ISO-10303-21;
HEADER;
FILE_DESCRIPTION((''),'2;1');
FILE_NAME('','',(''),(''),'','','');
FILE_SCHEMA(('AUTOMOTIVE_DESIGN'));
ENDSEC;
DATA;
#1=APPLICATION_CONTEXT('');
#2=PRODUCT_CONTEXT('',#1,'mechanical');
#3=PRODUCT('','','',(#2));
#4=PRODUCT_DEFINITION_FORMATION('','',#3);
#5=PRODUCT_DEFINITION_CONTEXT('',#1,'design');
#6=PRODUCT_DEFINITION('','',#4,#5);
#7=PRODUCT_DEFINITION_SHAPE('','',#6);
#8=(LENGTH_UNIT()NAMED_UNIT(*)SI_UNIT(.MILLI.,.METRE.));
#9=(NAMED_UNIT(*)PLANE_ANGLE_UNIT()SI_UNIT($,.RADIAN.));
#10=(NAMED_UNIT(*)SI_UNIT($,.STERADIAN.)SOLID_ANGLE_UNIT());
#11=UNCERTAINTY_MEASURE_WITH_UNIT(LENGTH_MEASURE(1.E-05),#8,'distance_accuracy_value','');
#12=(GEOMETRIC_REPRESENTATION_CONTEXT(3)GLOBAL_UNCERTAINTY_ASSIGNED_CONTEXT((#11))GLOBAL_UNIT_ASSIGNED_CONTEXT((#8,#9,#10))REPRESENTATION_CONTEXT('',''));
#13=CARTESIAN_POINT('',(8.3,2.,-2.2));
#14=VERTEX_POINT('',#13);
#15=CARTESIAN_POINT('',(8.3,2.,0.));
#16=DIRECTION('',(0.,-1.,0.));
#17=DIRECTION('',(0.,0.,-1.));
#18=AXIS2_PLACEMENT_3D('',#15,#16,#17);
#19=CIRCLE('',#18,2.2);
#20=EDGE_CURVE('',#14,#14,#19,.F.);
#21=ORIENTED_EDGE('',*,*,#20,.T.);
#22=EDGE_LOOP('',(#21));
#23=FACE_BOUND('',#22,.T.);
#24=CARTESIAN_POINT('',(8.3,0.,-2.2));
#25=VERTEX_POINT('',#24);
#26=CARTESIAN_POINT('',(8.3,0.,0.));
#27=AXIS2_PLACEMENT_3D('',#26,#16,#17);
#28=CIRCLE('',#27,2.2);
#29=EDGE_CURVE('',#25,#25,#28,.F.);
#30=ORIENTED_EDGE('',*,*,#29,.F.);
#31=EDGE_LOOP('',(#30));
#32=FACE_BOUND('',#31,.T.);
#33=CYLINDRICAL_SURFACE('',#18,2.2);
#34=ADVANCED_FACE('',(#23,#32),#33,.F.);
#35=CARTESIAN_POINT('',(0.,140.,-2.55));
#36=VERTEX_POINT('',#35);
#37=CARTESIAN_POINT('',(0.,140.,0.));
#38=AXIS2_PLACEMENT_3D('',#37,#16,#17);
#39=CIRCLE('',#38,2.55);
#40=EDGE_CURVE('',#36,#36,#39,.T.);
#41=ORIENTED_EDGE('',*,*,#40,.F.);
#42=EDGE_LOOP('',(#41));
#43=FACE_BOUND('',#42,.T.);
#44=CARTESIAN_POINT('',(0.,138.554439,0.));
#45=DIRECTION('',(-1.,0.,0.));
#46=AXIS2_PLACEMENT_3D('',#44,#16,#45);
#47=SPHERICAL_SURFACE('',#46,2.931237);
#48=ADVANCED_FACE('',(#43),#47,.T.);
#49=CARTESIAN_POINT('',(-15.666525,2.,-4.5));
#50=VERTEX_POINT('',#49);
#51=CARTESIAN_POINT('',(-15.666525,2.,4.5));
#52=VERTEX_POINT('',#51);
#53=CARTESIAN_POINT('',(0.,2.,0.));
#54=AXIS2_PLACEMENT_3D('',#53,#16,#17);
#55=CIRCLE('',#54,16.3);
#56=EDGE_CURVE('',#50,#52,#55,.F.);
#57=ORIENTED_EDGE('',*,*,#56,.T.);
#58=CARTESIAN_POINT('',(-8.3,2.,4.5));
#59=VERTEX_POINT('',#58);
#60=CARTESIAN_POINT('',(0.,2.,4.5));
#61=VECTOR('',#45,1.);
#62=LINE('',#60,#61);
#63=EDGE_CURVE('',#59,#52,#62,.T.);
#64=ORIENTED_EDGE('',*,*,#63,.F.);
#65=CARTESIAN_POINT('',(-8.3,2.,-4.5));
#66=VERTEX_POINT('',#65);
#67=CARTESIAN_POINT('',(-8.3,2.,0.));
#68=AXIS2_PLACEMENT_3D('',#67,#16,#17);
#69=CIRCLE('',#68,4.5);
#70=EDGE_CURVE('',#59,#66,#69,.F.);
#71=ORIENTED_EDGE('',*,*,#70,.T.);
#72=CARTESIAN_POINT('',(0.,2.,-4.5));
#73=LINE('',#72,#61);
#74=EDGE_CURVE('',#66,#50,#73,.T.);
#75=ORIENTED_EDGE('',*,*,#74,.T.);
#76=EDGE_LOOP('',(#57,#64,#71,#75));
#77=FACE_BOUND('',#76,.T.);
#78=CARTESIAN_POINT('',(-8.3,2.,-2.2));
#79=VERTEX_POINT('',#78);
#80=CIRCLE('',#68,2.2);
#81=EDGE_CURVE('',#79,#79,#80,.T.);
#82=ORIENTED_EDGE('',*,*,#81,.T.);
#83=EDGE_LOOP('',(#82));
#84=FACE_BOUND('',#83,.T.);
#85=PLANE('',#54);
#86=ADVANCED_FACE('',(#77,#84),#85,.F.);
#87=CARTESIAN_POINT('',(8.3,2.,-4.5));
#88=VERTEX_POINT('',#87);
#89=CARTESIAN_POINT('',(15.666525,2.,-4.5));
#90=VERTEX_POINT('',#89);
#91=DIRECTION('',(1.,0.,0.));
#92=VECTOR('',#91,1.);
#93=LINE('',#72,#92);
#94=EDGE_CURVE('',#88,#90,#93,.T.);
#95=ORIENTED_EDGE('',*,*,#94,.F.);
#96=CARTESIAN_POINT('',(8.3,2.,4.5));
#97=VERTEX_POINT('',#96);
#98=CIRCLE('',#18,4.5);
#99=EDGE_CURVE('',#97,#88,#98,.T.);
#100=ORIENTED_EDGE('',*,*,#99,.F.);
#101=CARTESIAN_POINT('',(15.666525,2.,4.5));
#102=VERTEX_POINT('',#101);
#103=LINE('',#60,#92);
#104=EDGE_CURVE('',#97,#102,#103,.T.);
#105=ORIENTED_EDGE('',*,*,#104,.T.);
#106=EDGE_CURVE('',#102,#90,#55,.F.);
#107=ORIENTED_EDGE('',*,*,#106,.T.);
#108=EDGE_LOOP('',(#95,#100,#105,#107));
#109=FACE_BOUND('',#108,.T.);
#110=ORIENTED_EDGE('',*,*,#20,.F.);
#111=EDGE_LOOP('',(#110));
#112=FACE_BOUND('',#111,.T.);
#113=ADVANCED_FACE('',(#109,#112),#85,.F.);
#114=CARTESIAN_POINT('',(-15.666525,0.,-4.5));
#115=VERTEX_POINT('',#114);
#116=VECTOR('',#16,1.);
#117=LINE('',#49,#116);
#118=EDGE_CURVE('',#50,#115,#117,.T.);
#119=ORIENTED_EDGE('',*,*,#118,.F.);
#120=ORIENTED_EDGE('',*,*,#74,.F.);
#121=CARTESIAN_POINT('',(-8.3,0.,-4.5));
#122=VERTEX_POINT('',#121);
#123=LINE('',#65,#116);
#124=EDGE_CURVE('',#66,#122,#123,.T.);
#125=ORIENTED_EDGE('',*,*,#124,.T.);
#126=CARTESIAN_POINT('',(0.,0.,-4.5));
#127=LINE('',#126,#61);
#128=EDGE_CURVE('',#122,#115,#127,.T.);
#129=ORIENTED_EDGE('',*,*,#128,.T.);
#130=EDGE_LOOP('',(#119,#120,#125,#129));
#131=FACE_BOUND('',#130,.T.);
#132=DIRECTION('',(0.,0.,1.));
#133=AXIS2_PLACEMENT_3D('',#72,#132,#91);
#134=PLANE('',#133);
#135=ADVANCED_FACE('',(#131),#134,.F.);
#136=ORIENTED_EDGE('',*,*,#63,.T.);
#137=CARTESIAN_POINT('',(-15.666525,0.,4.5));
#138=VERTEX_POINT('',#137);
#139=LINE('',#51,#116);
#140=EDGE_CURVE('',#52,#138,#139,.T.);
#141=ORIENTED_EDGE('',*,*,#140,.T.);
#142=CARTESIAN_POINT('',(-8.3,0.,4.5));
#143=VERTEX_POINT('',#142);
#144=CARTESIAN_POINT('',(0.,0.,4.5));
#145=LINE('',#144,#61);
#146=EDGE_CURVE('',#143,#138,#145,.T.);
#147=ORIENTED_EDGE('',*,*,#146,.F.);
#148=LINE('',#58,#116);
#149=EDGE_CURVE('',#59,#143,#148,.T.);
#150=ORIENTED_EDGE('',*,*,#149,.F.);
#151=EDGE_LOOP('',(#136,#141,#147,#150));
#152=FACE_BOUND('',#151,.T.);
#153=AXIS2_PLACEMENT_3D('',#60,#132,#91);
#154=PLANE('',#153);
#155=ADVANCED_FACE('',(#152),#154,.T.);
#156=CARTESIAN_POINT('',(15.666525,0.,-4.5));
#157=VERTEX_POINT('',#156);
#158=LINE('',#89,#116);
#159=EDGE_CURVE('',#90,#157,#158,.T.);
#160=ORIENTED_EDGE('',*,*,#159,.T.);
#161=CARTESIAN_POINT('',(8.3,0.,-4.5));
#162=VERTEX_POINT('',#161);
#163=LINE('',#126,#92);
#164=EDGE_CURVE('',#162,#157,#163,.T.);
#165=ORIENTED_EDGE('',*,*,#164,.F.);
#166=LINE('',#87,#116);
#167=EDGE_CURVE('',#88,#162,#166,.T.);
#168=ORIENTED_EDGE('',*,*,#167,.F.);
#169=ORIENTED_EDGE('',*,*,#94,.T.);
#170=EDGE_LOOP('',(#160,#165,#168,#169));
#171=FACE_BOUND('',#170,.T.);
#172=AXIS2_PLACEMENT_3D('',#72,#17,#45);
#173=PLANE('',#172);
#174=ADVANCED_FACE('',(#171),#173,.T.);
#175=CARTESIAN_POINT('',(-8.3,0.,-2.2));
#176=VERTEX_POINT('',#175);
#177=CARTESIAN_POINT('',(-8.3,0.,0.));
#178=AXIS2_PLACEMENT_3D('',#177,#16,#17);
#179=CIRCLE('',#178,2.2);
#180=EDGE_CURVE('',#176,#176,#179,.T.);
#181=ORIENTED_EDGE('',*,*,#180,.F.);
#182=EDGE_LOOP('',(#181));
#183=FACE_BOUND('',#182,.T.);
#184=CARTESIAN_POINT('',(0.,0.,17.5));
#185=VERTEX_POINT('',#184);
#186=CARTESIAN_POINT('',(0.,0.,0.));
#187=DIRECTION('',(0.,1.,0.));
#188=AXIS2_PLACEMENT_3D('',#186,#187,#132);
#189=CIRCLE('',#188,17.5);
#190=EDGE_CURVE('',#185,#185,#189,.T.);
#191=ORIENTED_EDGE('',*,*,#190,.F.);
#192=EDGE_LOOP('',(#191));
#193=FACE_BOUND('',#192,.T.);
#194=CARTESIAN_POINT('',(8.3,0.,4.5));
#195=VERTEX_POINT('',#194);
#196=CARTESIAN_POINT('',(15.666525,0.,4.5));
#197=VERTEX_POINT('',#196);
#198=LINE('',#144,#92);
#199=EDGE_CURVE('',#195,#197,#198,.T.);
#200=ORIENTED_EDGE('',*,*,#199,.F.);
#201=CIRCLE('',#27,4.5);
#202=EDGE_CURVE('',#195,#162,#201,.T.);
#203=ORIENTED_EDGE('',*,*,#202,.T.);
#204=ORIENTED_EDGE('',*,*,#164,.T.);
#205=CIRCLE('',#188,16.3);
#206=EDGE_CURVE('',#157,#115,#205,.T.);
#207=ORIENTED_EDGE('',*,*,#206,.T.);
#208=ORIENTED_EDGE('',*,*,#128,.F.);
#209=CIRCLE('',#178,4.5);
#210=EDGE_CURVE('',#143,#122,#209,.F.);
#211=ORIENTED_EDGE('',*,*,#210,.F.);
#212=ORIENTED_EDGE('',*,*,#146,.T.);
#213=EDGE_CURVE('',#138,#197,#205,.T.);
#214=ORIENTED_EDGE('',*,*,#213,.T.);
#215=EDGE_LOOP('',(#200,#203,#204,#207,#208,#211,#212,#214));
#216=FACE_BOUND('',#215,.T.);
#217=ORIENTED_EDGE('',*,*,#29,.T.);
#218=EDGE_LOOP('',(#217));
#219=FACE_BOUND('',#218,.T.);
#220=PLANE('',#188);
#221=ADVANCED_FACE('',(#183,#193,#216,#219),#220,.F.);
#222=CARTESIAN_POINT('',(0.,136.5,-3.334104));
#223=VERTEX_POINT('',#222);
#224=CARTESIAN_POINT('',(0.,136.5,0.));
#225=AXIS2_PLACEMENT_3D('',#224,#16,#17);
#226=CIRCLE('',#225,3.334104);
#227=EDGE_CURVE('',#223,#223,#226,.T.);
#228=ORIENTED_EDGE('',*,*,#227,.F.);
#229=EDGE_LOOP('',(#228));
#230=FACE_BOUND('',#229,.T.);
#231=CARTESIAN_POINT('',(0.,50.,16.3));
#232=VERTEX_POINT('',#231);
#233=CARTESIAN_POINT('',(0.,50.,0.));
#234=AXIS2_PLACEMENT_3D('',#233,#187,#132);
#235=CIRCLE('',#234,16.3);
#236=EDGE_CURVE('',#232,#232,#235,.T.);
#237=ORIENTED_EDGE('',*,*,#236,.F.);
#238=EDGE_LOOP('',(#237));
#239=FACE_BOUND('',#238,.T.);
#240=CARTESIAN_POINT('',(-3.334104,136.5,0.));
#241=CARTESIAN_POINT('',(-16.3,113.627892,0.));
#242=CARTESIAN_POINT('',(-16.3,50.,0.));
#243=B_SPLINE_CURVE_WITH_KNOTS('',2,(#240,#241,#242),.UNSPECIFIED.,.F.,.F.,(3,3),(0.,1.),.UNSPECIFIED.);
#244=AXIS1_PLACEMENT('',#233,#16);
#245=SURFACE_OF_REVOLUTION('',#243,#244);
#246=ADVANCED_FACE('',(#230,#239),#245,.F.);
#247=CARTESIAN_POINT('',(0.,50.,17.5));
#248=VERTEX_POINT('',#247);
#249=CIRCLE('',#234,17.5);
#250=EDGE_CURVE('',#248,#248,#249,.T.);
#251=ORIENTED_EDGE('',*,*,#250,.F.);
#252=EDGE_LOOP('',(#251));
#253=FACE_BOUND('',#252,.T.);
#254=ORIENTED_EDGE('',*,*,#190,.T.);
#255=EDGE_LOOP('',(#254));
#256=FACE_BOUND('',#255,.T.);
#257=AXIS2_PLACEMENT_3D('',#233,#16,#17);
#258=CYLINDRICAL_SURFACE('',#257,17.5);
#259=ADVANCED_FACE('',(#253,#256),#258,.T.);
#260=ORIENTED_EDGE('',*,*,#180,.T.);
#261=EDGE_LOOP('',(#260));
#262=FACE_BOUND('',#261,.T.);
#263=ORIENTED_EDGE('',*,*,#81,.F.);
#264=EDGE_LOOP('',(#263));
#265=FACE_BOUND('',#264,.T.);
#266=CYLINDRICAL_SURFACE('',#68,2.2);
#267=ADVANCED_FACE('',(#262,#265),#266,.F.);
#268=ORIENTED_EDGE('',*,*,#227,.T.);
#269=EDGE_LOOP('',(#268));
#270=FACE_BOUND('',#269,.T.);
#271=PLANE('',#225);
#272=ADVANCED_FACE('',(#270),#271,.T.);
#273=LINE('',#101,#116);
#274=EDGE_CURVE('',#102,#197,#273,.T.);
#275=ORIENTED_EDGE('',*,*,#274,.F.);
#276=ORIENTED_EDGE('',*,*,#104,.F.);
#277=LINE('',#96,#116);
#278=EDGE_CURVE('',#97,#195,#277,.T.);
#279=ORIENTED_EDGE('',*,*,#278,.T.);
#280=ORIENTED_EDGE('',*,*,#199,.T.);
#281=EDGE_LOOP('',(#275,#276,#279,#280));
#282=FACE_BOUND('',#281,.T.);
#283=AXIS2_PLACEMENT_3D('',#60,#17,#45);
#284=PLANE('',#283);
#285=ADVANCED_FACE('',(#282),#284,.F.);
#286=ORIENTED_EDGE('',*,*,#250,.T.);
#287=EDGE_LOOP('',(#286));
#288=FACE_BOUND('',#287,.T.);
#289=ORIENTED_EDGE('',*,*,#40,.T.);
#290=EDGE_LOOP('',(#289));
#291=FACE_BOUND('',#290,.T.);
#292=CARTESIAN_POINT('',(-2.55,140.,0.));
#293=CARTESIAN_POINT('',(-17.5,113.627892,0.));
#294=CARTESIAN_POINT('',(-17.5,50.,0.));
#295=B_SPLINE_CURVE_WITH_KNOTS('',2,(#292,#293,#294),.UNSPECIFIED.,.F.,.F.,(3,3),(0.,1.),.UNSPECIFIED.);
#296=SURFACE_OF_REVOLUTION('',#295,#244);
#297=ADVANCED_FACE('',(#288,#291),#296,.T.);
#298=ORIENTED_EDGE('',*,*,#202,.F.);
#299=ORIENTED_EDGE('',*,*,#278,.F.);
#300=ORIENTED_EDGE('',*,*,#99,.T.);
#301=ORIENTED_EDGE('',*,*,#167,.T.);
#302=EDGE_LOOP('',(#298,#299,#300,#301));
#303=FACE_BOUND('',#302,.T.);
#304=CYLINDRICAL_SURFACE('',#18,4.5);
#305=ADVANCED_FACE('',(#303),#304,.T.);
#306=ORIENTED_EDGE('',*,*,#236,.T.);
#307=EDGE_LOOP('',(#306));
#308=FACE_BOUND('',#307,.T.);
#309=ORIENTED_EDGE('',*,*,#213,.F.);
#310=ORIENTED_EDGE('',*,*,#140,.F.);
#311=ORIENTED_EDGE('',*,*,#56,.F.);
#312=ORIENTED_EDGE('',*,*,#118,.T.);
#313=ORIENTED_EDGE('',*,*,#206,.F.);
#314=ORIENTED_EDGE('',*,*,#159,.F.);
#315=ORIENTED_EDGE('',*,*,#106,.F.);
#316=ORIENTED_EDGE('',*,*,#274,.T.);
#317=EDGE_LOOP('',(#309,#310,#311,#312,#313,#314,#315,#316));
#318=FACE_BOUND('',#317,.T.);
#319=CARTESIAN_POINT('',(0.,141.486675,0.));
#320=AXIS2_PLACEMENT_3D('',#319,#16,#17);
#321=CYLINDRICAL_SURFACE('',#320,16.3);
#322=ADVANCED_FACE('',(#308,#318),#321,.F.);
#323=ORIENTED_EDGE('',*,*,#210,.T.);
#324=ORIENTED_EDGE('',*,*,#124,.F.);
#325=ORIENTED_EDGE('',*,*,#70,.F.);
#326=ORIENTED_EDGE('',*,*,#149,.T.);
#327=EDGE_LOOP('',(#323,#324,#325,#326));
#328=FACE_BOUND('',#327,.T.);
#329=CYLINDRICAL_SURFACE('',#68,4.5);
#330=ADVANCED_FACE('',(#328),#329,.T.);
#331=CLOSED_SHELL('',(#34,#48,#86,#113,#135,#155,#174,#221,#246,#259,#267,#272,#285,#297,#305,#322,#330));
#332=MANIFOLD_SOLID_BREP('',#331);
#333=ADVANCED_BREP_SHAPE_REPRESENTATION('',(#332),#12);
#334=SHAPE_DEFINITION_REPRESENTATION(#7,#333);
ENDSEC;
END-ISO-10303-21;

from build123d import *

# Parameters (mm, degrees)
SCHIZZO1_R                   = 17.5
ESTRUSIONE_ESTRUSIONE1_DEPTH = 50
TAGLIO_ESTRUSIONE1_REACH     = 145.634
SCHIZZO10_R                  = 16.3
SKETCH2_R                    = 2.2
BOSS_EXTRUDE4_DEPTH          = 2


# Read off the part's stored shape, not the designer's step: Rivoluzione1
with BuildPart() as part:
    # Schizzo1 → Estrusione-Estrusione1 (new body)
    with BuildSketch(Plane(origin=(0, 0, 0), x_dir=(1, 0, 0), z_dir=(0, 1, 0))):
        with Locations(Location((0, 0, 0), (0, 0, 270))):
            Circle(SCHIZZO1_R)
    extrude(amount=ESTRUSIONE_ESTRUSIONE1_DEPTH)

    # Rivoluzione1 outline → Rivoluzione1 (revolve)
    with BuildSketch(Plane.XY):
        with BuildLine():
            Line((0, 141.485675179), (0, 136.5))
            Line((0, 136.5), (3.334103826, 136.5))
            add(Edge.make_bspline(
                [(3.334103826, 136.5), (16.3, 113.62789219), (16.3, 50)],
                knots=[0, 0, 0, 1, 1, 1], degree=2))
            Line((16.3, 50), (17.5, 50))
            add(Edge.make_bspline(
                [(17.5, 50), (17.5, 113.62789219), (2.55, 140)],
                knots=[0.063509007, 0.063509007, 0.063509007, 1.063509007, 1.063509007, 1.063509007], degree=2))
            ThreePointArc((2.55, 140), (1.475612649, 141.087167398), (0, 141.485675179))
        make_face()
    revolve(axis=Axis((0, 0, 0), (0, 1, 0)))

    # Schizzo10 → Taglio-Estrusione1 (cut, up to next)
    with BuildSketch(Plane(origin=(0, 0, 0), x_dir=(1, 0, 0), z_dir=(0, 1, 0)), mode=Mode.PRIVATE) as taglio_estrusione1_sk1:
        with Locations(Location((0, 0, 0), (0, 0, 270))):
            Circle(SCHIZZO10_R)
    taglio_estrusione1_tool1 = extrude(taglio_estrusione1_sk1.sketch, amount=TAGLIO_ESTRUSIONE1_REACH, mode=Mode.PRIVATE) & part.part
    add(taglio_estrusione1_tool1.solids().sort_by_distance((0, 0, 0))[0], mode=Mode.SUBTRACT)

    # Sketch2 → Boss-Extrude4 (add)
    # profile 1 of 2: a face of its own
    with BuildSketch(Plane.XZ):
        with BuildLine():
            ThreePointArc((8.3, 4.5), (3.8, 0), (8.3, -4.5))
            Line((8.3, -4.5), (15.666524822, -4.5))
            ThreePointArc((15.666524822, -4.5), (16.3, 0), (15.666524822, 4.5))
            Line((15.666524822, 4.5), (8.3, 4.5))
        make_face()
        with Locations(Location((8.3, 0, 0), (0, 0, 270))):
            Circle(SKETCH2_R, mode=Mode.SUBTRACT)
    # profile 2 of 2: a face of its own
    with BuildSketch(Plane.XZ):
        with BuildLine():
            Line((-8.3, 4.5), (-15.666524822, 4.5))
            ThreePointArc((-15.666524822, 4.5), (-16.3, 0), (-15.666524822, -4.5))
            Line((-15.666524822, -4.5), (-8.3, -4.5))
            ThreePointArc((-8.3, -4.5), (-3.8, 0), (-8.3, 4.5))
        make_face()
        with Locations(Location((-8.3, 0, 0), (0, 0, 270))):
            Circle(SKETCH2_R, mode=Mode.SUBTRACT)
    extrude(amount=-BOSS_EXTRUDE4_DEPTH)


solid = part.part
